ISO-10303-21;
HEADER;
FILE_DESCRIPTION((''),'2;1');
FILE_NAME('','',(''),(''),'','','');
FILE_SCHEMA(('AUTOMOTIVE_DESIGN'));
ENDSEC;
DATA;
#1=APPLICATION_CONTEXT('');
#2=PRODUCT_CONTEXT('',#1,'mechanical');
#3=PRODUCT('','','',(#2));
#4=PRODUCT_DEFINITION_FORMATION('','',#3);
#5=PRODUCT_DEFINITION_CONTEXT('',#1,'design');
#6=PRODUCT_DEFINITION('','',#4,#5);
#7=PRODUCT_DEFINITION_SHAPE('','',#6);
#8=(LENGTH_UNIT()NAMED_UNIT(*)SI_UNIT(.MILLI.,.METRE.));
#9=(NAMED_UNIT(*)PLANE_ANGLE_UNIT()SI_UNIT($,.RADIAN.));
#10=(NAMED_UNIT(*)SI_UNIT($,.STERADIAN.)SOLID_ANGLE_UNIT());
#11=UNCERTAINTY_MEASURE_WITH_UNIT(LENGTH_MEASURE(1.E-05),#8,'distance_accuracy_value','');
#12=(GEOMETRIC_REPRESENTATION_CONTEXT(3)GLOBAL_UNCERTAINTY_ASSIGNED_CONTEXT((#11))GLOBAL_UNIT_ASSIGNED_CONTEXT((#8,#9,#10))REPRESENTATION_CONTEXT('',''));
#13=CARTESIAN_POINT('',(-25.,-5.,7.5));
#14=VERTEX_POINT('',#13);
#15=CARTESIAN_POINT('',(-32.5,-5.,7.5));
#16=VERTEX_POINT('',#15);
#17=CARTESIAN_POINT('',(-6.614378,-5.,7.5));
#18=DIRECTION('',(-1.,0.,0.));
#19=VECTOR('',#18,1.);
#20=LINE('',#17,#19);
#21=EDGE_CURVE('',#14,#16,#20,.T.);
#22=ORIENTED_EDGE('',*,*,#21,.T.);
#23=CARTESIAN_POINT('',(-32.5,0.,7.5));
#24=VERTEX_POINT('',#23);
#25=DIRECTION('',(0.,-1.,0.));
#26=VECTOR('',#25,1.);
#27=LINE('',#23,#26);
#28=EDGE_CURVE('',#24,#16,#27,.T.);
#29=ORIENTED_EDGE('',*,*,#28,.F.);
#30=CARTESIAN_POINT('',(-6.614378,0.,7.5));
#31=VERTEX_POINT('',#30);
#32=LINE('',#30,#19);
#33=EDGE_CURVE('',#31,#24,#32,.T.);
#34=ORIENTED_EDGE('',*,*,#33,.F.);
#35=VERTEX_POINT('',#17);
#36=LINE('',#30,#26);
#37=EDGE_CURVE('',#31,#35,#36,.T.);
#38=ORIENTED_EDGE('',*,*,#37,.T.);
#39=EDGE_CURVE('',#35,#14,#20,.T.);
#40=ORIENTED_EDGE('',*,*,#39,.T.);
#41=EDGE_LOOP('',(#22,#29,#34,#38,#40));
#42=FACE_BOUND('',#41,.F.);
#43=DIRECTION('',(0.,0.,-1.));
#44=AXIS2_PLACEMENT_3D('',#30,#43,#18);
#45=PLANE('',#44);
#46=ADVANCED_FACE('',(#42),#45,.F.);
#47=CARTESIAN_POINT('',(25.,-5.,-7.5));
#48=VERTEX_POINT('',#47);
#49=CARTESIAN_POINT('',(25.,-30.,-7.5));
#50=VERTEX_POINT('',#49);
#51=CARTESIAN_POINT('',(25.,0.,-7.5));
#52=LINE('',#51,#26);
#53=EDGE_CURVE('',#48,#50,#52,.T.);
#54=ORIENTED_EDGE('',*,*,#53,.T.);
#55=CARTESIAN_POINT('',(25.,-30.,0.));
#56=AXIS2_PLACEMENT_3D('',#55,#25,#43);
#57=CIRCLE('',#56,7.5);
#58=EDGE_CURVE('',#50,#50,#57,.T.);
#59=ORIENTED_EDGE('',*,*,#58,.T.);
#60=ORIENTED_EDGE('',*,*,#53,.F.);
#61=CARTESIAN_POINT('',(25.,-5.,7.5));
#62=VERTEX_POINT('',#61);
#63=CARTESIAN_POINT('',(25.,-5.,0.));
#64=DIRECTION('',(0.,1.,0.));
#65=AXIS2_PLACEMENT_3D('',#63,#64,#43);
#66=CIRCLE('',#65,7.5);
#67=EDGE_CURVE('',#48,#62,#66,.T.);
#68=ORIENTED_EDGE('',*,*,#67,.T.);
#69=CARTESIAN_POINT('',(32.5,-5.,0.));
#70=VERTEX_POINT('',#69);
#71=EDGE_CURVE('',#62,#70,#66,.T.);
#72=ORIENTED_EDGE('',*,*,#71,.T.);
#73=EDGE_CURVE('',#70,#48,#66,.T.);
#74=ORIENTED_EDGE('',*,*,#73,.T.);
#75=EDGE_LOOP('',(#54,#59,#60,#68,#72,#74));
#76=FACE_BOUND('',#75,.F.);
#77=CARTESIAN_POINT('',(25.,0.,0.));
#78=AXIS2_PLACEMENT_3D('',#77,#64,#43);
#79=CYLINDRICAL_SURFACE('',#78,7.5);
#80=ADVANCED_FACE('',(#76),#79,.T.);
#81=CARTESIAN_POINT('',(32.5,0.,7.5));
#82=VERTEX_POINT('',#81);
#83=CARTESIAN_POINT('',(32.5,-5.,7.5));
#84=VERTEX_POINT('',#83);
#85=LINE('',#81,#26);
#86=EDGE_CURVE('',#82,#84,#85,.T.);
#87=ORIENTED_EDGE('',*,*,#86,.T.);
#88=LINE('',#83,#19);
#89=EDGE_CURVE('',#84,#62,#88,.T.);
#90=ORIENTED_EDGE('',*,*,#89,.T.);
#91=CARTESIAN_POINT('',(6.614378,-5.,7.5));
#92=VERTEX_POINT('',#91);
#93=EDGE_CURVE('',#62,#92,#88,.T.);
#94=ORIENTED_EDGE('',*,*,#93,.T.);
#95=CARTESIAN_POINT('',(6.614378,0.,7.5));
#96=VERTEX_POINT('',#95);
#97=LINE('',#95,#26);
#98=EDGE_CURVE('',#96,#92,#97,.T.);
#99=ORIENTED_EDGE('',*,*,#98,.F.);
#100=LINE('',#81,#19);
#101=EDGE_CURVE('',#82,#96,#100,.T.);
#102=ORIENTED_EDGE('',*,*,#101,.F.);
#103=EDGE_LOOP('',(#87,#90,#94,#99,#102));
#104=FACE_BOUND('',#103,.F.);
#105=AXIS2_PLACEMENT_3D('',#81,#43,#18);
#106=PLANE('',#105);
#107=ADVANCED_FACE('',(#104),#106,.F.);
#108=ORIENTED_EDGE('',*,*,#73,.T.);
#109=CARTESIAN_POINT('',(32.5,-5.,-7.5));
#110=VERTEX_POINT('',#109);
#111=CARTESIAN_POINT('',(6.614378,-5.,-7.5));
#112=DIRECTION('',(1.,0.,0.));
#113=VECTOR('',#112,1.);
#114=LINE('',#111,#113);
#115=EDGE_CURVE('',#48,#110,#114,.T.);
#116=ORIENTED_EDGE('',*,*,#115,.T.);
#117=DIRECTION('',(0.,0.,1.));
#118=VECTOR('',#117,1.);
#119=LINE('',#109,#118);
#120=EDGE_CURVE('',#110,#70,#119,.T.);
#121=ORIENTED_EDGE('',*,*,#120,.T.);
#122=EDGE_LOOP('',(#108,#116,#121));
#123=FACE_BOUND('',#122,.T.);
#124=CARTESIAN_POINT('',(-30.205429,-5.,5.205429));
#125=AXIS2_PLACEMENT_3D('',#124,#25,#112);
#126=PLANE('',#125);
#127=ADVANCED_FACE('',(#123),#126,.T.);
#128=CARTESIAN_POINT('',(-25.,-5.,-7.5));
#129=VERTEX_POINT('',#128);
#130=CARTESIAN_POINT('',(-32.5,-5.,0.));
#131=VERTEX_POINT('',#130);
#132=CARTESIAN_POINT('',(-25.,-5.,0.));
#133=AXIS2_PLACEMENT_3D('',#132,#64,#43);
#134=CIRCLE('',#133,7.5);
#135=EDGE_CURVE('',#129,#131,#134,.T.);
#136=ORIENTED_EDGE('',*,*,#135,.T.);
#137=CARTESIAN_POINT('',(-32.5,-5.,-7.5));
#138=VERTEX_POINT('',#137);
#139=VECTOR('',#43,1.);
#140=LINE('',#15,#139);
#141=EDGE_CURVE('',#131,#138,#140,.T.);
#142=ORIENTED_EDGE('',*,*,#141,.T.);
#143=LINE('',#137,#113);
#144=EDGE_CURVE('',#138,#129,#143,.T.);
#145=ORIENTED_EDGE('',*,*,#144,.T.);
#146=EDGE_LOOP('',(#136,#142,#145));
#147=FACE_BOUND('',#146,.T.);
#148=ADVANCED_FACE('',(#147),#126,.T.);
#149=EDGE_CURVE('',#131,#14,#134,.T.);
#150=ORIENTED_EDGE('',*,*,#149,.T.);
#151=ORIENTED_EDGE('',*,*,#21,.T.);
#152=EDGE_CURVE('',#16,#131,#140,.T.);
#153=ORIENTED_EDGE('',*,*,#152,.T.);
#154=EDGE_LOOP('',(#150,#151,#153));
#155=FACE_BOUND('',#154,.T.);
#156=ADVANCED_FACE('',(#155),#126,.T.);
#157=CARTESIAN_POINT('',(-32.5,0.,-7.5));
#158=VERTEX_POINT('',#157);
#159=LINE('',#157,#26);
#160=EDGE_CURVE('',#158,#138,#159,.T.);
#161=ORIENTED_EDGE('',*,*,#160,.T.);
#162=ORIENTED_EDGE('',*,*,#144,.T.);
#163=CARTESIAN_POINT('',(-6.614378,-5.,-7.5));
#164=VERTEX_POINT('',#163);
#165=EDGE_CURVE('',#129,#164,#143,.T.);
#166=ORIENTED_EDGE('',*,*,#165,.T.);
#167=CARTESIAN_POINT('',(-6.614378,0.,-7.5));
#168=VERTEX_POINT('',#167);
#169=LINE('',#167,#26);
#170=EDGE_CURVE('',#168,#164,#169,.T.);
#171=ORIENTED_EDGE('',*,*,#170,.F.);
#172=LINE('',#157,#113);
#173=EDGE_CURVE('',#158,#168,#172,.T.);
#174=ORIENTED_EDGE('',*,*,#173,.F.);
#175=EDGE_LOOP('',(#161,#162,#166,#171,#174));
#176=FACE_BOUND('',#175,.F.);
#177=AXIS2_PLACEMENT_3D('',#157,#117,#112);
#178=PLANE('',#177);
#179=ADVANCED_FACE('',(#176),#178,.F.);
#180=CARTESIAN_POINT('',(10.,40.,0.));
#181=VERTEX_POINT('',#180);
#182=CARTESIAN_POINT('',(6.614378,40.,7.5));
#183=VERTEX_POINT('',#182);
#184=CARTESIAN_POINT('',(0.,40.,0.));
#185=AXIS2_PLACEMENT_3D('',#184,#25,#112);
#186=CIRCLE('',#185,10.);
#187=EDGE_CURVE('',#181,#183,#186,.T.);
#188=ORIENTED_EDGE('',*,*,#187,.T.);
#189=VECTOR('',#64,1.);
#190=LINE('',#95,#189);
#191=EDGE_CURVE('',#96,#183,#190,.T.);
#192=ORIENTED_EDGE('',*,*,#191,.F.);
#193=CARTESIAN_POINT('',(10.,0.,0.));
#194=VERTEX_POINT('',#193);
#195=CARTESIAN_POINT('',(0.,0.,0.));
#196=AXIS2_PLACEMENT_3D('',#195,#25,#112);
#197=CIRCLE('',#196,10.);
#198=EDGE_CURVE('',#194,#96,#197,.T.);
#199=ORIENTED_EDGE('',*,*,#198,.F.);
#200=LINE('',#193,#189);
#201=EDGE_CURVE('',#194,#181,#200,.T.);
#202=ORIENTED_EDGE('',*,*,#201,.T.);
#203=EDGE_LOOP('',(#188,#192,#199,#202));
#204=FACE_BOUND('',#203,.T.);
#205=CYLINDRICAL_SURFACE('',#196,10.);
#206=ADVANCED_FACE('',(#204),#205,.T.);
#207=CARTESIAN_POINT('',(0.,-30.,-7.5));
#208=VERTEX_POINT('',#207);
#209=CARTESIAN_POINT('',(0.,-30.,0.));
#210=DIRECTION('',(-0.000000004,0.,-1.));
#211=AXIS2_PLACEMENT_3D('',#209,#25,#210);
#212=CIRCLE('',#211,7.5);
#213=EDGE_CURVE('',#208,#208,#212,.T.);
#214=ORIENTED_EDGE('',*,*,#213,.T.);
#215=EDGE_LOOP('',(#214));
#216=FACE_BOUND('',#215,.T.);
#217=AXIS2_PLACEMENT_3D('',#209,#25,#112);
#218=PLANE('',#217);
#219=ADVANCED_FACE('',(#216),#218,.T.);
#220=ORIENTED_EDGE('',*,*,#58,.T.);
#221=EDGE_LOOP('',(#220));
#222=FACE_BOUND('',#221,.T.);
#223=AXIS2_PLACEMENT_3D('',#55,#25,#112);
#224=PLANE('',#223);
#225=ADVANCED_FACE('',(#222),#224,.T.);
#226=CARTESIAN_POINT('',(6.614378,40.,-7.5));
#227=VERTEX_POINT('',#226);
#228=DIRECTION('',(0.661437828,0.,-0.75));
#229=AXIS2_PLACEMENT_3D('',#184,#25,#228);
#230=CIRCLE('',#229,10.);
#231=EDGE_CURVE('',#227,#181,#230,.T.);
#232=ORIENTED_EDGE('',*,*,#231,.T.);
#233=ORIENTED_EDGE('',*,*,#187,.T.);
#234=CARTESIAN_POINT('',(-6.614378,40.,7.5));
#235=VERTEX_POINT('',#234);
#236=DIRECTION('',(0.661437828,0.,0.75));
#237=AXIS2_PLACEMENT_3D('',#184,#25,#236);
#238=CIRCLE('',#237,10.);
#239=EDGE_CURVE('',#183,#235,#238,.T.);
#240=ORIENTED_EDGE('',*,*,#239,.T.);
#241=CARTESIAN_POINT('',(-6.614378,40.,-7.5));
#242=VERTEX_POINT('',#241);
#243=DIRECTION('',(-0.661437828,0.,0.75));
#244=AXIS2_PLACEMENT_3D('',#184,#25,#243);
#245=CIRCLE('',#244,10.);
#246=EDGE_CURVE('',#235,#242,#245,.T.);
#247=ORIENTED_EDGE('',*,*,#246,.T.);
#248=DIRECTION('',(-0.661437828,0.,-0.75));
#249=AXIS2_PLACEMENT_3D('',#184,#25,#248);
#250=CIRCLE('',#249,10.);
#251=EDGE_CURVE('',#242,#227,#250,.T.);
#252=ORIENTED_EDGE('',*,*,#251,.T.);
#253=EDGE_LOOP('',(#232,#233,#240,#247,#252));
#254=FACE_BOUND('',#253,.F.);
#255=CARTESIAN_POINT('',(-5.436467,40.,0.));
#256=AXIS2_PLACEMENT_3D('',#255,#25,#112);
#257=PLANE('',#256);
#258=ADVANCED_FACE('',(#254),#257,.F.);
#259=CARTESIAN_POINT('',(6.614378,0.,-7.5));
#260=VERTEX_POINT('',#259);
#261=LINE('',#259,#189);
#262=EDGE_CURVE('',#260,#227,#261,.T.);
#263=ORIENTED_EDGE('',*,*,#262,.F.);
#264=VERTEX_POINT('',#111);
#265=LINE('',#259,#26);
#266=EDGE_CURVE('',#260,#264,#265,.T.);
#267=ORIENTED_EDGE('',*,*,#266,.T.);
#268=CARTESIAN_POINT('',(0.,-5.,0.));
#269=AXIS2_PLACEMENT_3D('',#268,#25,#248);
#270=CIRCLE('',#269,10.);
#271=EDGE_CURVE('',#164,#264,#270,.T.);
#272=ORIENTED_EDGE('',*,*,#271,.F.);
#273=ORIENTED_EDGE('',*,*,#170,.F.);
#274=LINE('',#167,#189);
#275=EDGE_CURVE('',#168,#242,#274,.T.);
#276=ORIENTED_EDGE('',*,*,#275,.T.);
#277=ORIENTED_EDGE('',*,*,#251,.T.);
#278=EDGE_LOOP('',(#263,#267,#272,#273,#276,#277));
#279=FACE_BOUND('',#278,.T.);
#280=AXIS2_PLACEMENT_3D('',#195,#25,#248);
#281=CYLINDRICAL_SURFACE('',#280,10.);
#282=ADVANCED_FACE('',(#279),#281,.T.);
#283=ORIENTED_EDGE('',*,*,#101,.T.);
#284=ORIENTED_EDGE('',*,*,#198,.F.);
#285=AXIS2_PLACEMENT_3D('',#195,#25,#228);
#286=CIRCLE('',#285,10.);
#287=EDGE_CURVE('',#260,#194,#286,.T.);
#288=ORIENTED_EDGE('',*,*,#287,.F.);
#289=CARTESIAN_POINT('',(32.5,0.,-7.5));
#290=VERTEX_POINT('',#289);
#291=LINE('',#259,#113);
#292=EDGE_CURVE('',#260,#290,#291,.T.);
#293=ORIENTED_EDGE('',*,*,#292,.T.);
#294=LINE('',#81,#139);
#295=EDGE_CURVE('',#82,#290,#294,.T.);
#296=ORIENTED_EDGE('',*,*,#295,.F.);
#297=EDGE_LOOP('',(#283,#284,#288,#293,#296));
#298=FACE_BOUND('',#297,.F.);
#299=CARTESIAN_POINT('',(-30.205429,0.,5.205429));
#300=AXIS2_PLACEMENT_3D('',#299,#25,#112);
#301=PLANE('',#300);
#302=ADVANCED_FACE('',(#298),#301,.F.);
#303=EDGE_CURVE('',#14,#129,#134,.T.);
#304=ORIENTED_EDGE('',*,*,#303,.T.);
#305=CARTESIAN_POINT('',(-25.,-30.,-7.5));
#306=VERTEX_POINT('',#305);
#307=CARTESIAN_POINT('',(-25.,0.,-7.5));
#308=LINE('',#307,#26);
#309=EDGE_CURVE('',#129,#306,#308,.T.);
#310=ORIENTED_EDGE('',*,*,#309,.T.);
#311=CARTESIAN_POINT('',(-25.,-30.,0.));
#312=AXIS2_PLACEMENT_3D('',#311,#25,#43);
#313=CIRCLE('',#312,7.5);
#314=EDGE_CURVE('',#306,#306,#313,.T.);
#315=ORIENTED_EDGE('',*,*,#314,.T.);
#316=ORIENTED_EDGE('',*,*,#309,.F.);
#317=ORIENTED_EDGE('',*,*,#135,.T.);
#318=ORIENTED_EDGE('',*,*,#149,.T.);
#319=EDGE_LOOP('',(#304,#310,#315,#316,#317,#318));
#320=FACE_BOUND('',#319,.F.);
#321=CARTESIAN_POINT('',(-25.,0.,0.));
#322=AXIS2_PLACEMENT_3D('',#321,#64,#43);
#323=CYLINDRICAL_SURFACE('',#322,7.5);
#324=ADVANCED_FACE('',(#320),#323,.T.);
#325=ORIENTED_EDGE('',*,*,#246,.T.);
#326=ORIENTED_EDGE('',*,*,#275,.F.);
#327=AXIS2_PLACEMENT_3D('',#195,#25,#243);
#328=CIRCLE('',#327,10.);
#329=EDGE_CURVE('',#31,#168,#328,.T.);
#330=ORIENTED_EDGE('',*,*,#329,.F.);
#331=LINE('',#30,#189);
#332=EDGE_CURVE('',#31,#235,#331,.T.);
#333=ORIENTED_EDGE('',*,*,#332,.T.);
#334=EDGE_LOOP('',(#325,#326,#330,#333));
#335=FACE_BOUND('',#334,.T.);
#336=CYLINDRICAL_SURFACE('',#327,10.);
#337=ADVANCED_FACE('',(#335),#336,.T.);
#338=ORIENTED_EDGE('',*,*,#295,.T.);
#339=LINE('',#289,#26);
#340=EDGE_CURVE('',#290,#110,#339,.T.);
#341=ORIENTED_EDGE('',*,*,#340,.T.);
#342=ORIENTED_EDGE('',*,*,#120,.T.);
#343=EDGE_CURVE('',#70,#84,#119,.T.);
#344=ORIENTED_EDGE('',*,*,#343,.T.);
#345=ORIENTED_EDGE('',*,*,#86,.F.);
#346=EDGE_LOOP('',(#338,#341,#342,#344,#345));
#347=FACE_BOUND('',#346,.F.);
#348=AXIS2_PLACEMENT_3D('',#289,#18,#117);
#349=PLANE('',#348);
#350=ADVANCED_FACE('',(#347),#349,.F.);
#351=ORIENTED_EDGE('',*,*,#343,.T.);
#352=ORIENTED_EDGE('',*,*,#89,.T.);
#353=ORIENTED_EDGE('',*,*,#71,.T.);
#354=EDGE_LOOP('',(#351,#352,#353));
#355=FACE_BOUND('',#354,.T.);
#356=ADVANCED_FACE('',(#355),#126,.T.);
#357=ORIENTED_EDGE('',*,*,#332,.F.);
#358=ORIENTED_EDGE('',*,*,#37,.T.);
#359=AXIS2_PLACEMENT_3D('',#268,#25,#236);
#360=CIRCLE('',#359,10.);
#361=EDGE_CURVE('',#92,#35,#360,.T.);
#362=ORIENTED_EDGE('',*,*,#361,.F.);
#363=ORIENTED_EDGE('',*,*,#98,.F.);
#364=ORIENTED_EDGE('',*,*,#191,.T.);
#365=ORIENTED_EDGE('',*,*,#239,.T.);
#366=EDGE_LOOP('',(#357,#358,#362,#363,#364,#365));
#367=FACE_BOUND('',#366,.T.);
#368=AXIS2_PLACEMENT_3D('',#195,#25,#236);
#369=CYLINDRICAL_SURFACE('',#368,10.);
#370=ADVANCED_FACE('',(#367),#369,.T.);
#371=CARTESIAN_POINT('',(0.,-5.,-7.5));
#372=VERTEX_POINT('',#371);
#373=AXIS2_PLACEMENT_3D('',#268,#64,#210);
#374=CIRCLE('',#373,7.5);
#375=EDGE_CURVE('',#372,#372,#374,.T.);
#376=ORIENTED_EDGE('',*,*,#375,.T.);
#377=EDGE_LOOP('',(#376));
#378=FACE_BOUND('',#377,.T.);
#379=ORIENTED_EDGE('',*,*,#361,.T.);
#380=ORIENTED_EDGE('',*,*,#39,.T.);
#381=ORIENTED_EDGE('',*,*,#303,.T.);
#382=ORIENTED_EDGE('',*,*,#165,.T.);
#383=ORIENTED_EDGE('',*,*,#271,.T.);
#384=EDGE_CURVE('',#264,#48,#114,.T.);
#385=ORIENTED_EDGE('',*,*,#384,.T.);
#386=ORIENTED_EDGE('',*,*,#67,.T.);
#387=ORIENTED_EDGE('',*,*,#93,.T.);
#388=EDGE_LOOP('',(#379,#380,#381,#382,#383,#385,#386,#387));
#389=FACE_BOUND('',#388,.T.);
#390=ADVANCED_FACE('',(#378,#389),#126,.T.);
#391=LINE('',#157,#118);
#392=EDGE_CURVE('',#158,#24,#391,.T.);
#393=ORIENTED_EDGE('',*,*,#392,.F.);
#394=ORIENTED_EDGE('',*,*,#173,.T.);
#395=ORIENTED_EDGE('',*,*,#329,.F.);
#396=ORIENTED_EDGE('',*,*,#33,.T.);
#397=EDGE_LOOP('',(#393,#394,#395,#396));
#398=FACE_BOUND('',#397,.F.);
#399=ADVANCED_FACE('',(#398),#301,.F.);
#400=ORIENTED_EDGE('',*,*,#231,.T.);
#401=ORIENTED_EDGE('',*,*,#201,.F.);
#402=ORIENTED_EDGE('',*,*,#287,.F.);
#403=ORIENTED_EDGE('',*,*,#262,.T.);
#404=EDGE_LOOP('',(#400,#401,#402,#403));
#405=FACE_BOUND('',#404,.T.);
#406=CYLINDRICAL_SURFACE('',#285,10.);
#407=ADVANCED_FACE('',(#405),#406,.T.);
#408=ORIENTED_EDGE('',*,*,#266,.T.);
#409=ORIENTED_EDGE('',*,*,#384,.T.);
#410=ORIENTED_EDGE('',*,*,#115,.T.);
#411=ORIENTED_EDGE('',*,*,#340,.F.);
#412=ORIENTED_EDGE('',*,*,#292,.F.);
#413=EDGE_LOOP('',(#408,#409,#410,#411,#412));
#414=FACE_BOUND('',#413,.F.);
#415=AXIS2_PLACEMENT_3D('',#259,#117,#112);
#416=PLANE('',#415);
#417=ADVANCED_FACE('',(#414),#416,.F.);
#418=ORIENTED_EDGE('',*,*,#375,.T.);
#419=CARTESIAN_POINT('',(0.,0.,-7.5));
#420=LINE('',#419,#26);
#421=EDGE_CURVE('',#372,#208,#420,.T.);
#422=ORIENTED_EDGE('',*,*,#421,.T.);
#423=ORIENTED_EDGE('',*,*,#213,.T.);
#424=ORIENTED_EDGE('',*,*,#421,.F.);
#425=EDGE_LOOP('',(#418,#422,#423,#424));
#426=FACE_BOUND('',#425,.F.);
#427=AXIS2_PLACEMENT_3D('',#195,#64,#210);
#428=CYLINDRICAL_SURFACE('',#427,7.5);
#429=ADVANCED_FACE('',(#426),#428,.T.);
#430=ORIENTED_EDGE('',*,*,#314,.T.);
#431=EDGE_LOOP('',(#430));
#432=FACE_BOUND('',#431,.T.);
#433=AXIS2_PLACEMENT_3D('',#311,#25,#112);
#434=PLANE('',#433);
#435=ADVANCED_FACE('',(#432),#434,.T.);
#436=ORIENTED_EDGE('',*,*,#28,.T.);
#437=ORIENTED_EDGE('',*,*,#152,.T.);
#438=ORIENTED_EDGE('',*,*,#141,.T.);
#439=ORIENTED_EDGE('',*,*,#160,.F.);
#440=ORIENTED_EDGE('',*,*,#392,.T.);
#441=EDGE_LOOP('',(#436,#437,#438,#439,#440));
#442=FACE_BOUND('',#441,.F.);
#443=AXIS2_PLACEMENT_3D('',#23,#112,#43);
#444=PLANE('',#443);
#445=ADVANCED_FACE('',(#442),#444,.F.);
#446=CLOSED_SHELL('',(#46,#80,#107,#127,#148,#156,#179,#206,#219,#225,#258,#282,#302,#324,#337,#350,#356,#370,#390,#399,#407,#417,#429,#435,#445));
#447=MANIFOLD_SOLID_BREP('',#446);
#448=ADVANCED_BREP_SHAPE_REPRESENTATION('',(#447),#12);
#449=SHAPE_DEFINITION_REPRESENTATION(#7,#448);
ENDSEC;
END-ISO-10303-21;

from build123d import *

# Parameters (mm, degrees)
F1_DEPTH = 5
F2_DEPTH = 30
F3_DEPTH = 40


# Not quite as in the source:
# - after a boolean that leaves OpenCascade's solid faulty, fix() repairs it


with BuildPart() as f1:
    # F0 (on Front) → F1 (new body)
    with BuildSketch(Plane.XZ):
        with BuildLine():
            Line((-25, 7.5), (-32.5, 7.5))
            Line((-32.5, 7.5), (-32.5, 0))
            ThreePointArc((-32.5, 0), (-30.3033008589, 5.3033008589), (-25, 7.5))
        make_face()
        with BuildLine():
            Line((-6.6143782777, 7.5), (-25, 7.5))
            ThreePointArc((-25, 7.5), (-19.6966991411, 5.3033008589), (-17.5, 0))
            ThreePointArc((-17.5, 0), (-19.6966991411, -5.3033008589), (-25, -7.5))
            Line((-25, -7.5), (-6.6143782777, -7.5))
            ThreePointArc((-6.6143782777, -7.5), (-10, 0), (-6.6143782777, 7.5))
        make_face()
        with BuildLine():
            ThreePointArc((-17.5, 0), (-19.6966991411, 5.3033008589), (-25, 7.5))
            ThreePointArc((-25, 7.5), (-30.3033008589, 5.3033008589), (-32.5, 0))
            ThreePointArc((-32.5, 0), (-30.3033008589, -5.3033008589), (-25, -7.5))
            ThreePointArc((-25, -7.5), (-19.6966991411, -5.3033008589), (-17.5, 0))
        make_face()
        with BuildLine():
            ThreePointArc((-25, -7.5), (-30.3033008589, -5.3033008589), (-32.5, 0))
            Line((-32.5, 0), (-32.5, -7.5))
            Line((-32.5, -7.5), (-25, -7.5))
        make_face()
        with BuildLine():
            ThreePointArc((6.6143782777, 7.5), (0, 10), (-6.6143782777, 7.5))
            Line((-6.6143782777, 7.5), (0, 7.5))
            Line((0, 7.5), (6.6143782777, 7.5))
        make_face()
        with BuildLine():
            Line((0, 7.5), (-6.6143782777, 7.5))
            ThreePointArc((-6.6143782777, 7.5), (-10, 0), (-6.6143782777, -7.5))
            Line((-6.6143782777, -7.5), (-2.86e-08, -7.5))
            ThreePointArc((-2.86e-08, -7.5), (-7.5, 1.43e-08), (0, 7.5))
        make_face()
        with BuildLine():
            Line((6.6143782777, 7.5), (0, 7.5))
            ThreePointArc((0, 7.5), (5.3033008589, 5.3033008589), (7.5, 0))
            ThreePointArc((7.5, 0), (5.3033008488, -5.303300869), (-2.86e-08, -7.5))
            Line((-2.86e-08, -7.5), (6.6143782777, -7.5))
            ThreePointArc((6.6143782777, -7.5), (9.1143782777, -4.1143782777), (10, 0))
            ThreePointArc((10, 0), (9.1143782777, 4.1143782777), (6.6143782777, 7.5))
        make_face()
        with BuildLine():
            Line((25, 7.5), (6.6143782777, 7.5))
            ThreePointArc((6.6143782777, 7.5), (9.1143782777, 4.1143782777), (10, 0))
            ThreePointArc((10, 0), (9.1143782777, -4.1143782777), (6.6143782777, -7.5))
            Line((6.6143782777, -7.5), (25, -7.5))
            ThreePointArc((25, -7.5), (17.5, 0), (25, 7.5))
        make_face()
        with BuildLine():
            Line((-2.86e-08, -7.5), (-6.6143782777, -7.5))
            ThreePointArc((-6.6143782777, -7.5), (0, -10), (6.6143782777, -7.5))
            Line((6.6143782777, -7.5), (-2.86e-08, -7.5))
        make_face()
        with BuildLine():
            Line((32.5, 7.5), (25, 7.5))
            ThreePointArc((25, 7.5), (30.3033008589, 5.3033008589), (32.5, 0))
            Line((32.5, 0), (32.5, 7.5))
        make_face()
        with BuildLine():
            ThreePointArc((32.5, 0), (30.3033008589, 5.3033008589), (25, 7.5))
            ThreePointArc((25, 7.5), (17.5, 0), (25, -7.5))
            ThreePointArc((25, -7.5), (30.3033008589, -5.3033008589), (32.5, 0))
        make_face()
        with BuildLine():
            Line((32.5, -7.5), (32.5, 0))
            ThreePointArc((32.5, 0), (30.3033008589, -5.3033008589), (25, -7.5))
            Line((25, -7.5), (32.5, -7.5))
        make_face()
    extrude(amount=F1_DEPTH)

    # F0 (on Front) → F2 (join)
    with BuildSketch(Plane.XZ):
        with BuildLine():
            ThreePointArc((7.5, 0), (5.3033008589, 5.3033008589), (0, 7.5))
            ThreePointArc((0, 7.5), (-7.5, 1.43e-08), (-2.86e-08, -7.5))
            ThreePointArc((-2.86e-08, -7.5), (5.3033008488, -5.303300869), (7.5, 0))
        make_face()
        with BuildLine():
            ThreePointArc((32.5, 0), (30.3033008589, 5.3033008589), (25, 7.5))
            ThreePointArc((25, 7.5), (17.5, 0), (25, -7.5))
            ThreePointArc((25, -7.5), (30.3033008589, -5.3033008589), (32.5, 0))
        make_face()
        with BuildLine():
            ThreePointArc((-17.5, 0), (-19.6966991411, 5.3033008589), (-25, 7.5))
            ThreePointArc((-25, 7.5), (-30.3033008589, 5.3033008589), (-32.5, 0))
            ThreePointArc((-32.5, 0), (-30.3033008589, -5.3033008589), (-25, -7.5))
            ThreePointArc((-25, -7.5), (-19.6966991411, -5.3033008589), (-17.5, 0))
        make_face()
    extrude(amount=F2_DEPTH)

    # F0 (on Front) → F3 (join)
    with BuildSketch(Plane.XZ):
        with BuildLine():
            Line((0, 7.5), (-6.6143782777, 7.5))
            ThreePointArc((-6.6143782777, 7.5), (-10, 0), (-6.6143782777, -7.5))
            Line((-6.6143782777, -7.5), (-2.86e-08, -7.5))
            ThreePointArc((-2.86e-08, -7.5), (-7.5, 1.43e-08), (0, 7.5))
        make_face()
        with BuildLine():
            ThreePointArc((7.5, 0), (5.3033008589, 5.3033008589), (0, 7.5))
            ThreePointArc((0, 7.5), (-7.5, 1.43e-08), (-2.86e-08, -7.5))
            ThreePointArc((-2.86e-08, -7.5), (5.3033008488, -5.303300869), (7.5, 0))
        make_face()
        with BuildLine():
            Line((-2.86e-08, -7.5), (-6.6143782777, -7.5))
            ThreePointArc((-6.6143782777, -7.5), (0, -10), (6.6143782777, -7.5))
            Line((6.6143782777, -7.5), (-2.86e-08, -7.5))
        make_face()
        with BuildLine():
            Line((6.6143782777, 7.5), (0, 7.5))
            ThreePointArc((0, 7.5), (5.3033008589, 5.3033008589), (7.5, 0))
            ThreePointArc((7.5, 0), (5.3033008488, -5.303300869), (-2.86e-08, -7.5))
            Line((-2.86e-08, -7.5), (6.6143782777, -7.5))
            ThreePointArc((6.6143782777, -7.5), (9.1143782777, -4.1143782777), (10, 0))
            ThreePointArc((10, 0), (9.1143782777, 4.1143782777), (6.6143782777, 7.5))
        make_face()
        with BuildLine():
            ThreePointArc((6.6143782777, 7.5), (0, 10), (-6.6143782777, 7.5))
            Line((-6.6143782777, 7.5), (0, 7.5))
            Line((0, 7.5), (6.6143782777, 7.5))
        make_face()
    extrude(amount=-F3_DEPTH)

    add(f1.part.fix(), mode=Mode.REPLACE)


solid = f1.part
